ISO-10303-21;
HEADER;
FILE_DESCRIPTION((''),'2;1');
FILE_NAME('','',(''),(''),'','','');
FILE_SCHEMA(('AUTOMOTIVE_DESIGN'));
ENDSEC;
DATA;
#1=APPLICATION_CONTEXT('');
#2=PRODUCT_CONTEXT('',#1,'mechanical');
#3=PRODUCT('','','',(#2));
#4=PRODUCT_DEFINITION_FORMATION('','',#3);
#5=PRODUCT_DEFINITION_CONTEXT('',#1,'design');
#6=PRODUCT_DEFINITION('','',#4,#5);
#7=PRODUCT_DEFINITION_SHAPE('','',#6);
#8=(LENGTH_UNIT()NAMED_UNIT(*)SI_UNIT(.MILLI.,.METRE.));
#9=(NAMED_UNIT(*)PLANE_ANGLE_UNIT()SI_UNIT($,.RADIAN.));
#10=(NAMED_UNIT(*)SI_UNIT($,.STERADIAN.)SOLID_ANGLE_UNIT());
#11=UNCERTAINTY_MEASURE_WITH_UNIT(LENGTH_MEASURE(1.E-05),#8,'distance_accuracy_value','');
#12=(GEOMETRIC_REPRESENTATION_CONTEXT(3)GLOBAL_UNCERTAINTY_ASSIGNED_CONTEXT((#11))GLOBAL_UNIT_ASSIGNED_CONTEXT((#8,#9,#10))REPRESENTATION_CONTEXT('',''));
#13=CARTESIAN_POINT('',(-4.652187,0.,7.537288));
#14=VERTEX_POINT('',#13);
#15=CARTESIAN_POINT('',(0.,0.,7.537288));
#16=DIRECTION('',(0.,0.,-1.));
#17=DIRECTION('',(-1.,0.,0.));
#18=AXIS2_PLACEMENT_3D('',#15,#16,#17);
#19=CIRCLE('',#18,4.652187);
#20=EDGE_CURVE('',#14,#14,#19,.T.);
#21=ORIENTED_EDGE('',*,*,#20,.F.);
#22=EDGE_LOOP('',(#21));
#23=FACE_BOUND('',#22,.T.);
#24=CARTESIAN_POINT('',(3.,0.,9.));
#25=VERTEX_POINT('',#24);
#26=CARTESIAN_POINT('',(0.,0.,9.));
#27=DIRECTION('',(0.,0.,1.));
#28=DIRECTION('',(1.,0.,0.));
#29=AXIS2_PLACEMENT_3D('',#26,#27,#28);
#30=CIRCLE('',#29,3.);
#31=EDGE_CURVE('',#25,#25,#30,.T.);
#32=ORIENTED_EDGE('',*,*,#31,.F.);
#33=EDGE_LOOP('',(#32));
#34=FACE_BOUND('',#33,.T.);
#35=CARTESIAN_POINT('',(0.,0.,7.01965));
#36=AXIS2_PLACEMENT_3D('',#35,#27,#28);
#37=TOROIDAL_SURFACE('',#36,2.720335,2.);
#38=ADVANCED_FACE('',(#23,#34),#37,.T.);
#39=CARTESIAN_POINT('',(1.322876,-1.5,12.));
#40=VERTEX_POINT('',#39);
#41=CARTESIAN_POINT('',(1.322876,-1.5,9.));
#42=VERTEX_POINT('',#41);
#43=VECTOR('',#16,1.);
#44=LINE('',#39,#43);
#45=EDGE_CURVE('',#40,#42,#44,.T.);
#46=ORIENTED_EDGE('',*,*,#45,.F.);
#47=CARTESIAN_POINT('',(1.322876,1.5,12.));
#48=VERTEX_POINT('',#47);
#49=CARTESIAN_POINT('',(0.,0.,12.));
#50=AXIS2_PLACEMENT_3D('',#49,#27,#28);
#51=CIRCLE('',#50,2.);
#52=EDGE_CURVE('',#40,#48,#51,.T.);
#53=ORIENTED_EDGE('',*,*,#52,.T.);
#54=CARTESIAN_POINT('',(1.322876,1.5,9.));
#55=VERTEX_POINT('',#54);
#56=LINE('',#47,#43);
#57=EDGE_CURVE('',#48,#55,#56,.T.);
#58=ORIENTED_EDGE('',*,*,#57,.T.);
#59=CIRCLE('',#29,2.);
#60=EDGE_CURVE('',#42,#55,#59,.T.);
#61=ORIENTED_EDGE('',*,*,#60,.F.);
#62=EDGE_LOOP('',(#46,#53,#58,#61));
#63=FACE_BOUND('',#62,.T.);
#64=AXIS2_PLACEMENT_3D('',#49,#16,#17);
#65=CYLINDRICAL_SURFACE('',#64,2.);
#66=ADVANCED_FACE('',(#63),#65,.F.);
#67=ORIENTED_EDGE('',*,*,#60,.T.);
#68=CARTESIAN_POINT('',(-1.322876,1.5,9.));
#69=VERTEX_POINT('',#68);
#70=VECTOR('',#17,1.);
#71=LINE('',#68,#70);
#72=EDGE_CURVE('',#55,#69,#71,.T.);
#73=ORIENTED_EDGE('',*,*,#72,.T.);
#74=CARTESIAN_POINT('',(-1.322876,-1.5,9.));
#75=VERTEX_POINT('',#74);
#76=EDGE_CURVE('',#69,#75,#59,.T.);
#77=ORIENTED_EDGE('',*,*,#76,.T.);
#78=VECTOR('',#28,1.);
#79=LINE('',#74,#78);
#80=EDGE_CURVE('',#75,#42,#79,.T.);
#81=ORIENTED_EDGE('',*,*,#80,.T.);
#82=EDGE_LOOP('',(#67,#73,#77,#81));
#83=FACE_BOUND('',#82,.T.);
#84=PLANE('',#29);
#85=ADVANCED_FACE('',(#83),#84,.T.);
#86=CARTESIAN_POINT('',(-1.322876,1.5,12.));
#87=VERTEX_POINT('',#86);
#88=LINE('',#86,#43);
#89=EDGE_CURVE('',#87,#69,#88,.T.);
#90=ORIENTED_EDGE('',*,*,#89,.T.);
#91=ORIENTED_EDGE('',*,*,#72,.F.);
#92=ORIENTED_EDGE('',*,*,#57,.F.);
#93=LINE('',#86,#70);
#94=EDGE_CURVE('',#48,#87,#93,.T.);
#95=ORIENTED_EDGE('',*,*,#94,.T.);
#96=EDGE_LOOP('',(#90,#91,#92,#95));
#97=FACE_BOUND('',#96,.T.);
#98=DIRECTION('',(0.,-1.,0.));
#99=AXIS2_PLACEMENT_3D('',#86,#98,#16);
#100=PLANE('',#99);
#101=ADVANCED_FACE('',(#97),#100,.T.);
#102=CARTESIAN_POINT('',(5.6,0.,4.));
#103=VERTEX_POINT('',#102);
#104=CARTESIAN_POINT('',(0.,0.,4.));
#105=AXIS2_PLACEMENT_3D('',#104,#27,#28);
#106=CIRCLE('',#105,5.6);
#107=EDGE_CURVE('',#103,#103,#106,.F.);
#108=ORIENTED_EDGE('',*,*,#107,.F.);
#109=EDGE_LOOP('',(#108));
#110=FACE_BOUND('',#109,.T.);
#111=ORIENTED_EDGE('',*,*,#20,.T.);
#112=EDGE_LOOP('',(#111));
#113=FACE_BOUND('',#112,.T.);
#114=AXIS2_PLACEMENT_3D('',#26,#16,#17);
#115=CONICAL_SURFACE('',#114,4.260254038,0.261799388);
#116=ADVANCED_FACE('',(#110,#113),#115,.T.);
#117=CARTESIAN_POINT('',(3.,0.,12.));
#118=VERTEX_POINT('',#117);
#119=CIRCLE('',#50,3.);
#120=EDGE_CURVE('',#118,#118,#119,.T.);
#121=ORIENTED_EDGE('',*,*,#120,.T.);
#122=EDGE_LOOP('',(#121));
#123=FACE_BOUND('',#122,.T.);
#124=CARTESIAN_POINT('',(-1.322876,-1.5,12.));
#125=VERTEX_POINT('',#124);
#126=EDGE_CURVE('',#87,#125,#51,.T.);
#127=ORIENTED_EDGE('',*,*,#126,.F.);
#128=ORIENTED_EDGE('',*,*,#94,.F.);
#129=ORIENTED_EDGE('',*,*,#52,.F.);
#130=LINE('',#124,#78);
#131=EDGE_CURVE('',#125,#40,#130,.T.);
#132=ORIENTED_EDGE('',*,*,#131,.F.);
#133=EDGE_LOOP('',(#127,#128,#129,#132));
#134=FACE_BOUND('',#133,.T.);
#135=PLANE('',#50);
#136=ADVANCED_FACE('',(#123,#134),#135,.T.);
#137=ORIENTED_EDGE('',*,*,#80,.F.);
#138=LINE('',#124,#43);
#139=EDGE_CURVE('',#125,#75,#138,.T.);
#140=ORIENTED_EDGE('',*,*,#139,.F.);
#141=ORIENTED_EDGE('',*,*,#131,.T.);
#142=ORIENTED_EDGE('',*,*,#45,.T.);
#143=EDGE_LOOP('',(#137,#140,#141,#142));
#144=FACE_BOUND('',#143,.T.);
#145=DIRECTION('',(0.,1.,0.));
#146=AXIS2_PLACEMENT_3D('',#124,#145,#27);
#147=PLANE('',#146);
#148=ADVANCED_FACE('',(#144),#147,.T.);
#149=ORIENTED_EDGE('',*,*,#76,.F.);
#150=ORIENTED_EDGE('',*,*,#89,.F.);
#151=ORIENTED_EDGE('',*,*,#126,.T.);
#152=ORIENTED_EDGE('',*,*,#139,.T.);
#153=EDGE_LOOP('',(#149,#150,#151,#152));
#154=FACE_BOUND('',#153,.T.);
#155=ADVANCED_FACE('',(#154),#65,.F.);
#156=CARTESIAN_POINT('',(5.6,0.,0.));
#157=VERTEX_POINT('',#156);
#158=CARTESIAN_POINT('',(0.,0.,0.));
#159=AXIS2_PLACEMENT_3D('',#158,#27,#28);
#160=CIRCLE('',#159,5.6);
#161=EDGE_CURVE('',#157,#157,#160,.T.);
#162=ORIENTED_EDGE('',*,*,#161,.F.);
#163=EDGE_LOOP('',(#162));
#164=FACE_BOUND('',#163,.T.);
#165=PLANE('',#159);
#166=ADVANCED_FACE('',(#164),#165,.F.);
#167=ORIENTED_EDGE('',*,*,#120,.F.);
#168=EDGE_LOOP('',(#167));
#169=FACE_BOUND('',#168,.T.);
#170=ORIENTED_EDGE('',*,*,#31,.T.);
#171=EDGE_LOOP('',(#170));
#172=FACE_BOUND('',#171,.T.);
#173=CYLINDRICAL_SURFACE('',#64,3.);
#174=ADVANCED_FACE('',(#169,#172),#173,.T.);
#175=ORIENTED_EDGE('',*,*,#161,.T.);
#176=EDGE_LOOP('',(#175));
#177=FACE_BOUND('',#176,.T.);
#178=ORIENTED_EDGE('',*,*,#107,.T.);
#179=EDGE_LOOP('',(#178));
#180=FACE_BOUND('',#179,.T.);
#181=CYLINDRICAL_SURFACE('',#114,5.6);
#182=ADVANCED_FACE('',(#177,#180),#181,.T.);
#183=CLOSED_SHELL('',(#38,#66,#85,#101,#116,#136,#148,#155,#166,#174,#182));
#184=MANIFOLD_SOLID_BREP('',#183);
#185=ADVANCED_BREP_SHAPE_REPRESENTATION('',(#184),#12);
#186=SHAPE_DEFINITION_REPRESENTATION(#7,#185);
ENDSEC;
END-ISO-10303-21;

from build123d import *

# Parameters (mm, degrees)
SKETCH1_R           = 5.6
BOSS_EXTRUDE1_DEPTH = 9
SKETCH2_R           = 3
BOSS_EXTRUDE2_DEPTH = 3
CHAMFER1_SIZE       = 5
CHAMFER1_SIZE2      = 1.339745962


with BuildPart() as part:
    # Sketch1 → Boss-Extrude1 (new body)
    with BuildSketch(Plane.XY):
        Circle(SKETCH1_R)
    extrude(amount=BOSS_EXTRUDE1_DEPTH)

    # Sketch2 → Boss-Extrude2 (add)
    with BuildSketch(Plane.XY.offset(9)):
        Circle(SKETCH2_R)
        with BuildLine():
            Line((-1.322875656, -1.5), (1.322875656, -1.5))
            ThreePointArc((1.322875656, -1.5), (2, 0), (1.322875656, 1.5))
            Line((1.322875656, 1.5), (-1.322875656, 1.5))
            ThreePointArc((-1.322875656, 1.5), (-2, 0), (-1.322875656, -1.5))
        make_face(mode=Mode.SUBTRACT)
    extrude(amount=BOSS_EXTRUDE2_DEPTH)

    # Chamfer1
    chamfer1_edges = [part.edges().sort_by_distance(p)[0] for p in [
        (-5.6, 0, 9),
    ]]
    chamfer1_side = [part.faces().sort_by_distance(p)[0] for p in [
        (-5.6, 0, 4.5),
    ]]
    chamfer(chamfer1_edges, length=CHAMFER1_SIZE, length2=CHAMFER1_SIZE2, reference=chamfer1_side[0])

    # Fillet1: read off the stored shape, not the designer's step
    # Fillet1 outline → Fillet1 (revolve, cut)
    with BuildSketch(Plane.XZ):
        with BuildLine():
            Line((4.652186603, 7.537287752), (4.652186603, 9))
            Line((4.652186603, 9), (3, 9))
            ThreePointArc((3, 9), (4.04607373, 8.517119759), (4.652186603, 7.537287752))
        make_face()
    revolve(axis=Axis((0, 0, 0), (0, 0, 1)), mode=Mode.SUBTRACT)


solid = part.part
